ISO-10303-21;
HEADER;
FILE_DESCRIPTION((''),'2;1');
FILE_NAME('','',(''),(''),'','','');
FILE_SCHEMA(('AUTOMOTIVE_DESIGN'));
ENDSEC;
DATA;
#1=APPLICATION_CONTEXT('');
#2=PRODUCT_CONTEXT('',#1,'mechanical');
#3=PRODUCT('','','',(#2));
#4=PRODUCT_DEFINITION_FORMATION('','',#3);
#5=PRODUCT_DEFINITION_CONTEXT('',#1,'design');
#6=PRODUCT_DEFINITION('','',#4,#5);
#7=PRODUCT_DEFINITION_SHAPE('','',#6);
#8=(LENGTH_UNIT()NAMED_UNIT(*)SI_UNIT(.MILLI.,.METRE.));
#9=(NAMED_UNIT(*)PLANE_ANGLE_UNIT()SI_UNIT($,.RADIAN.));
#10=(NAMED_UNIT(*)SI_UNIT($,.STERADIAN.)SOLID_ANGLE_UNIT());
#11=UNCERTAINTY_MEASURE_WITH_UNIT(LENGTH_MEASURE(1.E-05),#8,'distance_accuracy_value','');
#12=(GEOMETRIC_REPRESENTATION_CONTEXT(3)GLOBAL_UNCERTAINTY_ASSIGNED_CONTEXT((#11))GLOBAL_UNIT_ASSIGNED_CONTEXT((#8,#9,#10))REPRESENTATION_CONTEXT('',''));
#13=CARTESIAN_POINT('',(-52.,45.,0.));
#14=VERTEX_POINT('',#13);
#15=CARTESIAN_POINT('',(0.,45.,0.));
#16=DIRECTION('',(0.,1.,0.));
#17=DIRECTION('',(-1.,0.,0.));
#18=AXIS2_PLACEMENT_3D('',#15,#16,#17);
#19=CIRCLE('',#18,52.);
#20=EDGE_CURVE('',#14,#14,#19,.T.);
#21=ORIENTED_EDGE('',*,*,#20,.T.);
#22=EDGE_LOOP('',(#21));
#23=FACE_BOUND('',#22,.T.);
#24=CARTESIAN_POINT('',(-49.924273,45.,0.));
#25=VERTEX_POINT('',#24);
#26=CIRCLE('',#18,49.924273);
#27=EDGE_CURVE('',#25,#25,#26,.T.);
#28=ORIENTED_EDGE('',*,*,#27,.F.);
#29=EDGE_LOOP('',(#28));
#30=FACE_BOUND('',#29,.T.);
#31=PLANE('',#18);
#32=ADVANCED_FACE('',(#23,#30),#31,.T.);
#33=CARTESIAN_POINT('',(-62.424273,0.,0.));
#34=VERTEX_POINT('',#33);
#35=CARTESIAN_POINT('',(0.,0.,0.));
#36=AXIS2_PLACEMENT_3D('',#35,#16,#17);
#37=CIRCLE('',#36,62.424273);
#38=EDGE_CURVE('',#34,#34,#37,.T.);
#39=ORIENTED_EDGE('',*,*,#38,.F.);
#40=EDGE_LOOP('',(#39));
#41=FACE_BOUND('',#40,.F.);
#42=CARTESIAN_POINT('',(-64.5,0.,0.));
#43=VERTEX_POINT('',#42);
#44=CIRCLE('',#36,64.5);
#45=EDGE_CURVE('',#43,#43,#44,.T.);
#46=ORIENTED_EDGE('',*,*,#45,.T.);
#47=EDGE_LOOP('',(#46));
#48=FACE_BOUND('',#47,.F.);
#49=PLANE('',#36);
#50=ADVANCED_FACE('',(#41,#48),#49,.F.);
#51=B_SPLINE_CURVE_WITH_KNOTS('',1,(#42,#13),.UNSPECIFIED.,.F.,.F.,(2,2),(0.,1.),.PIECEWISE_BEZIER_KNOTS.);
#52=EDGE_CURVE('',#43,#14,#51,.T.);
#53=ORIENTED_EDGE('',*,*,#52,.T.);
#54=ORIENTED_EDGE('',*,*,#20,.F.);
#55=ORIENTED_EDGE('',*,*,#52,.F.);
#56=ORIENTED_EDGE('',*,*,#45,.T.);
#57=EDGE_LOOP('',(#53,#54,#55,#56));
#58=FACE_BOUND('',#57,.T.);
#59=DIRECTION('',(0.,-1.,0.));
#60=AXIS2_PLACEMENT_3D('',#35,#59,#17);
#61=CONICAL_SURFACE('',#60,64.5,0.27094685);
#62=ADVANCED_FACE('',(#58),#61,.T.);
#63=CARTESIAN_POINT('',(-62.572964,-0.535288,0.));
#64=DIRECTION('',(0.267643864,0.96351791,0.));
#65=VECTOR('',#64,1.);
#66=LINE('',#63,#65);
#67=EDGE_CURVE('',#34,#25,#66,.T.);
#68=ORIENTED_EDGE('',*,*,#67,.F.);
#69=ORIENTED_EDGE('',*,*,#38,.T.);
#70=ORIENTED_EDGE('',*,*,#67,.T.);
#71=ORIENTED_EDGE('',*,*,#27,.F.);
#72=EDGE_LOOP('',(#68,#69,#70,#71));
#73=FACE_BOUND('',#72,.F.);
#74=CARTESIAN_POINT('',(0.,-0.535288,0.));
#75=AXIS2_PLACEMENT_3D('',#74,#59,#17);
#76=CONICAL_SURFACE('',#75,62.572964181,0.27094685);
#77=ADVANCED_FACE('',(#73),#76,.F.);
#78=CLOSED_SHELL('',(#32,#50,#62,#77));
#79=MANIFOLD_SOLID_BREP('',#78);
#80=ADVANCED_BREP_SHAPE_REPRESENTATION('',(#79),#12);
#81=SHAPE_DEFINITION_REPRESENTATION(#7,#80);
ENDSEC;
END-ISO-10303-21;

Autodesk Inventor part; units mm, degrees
ref_plane "YZ Plane" through (0, 0, 0) normal (1, 0, 0) x (0, 1, 0)
ref_plane "XY Plane" through (0, 0, 0) normal (0, 0, 1) x (1, 0, 0)
sketch "Szkic6" plane through (0, 0, 0) normal (0, 1, 0) x (-1, 0, 0)
  circle A0 centre (0, 0) radius 64.5
  dimension "d33" = 129
ref_plane "Płaszczyzna konstrukcyjna1" through (0, 45, 0) normal (0, 1, 0) x (-1, 0, 0)
sketch "Szkic7" plane through (0, 45, 0) normal (0, 1, 0) x (-1, 0, 0)
  circle A0 centre (0, 0) radius 52
  dimension "d35" = 104
loft "Wyciągnięcie złożone1" add profiles "Szkic6", "Szkic7"
shell "Skorupa1" thickness 2 removed faces 2 at (-18.5271, 45, 25.061) at (-10.0865, 0, -16.1433)
equation "\"d33\" = OD1"
equation "\"d35\" = OD2"
equation "\"d52\" = THK"
equation "\"SzerokośćGięciaPodcięcia\" = Grubość"
equation "\"RozmiarPodcięciaNarożnika\" = 4 * Grubość"
equation "\"PromieńPrzejścia\" = PromieńGięcia"
equation "\"Rozmiar_promienia_Jacobiego\" = PromieńGięcia"
equation "\"Wielk_odstępu\" = Grubość"
equation "\"d2\" = PromieńGięcia"
equation "\"d23\" = PromieńGięcia"
equation "\"OD1\" = 129"
equation "\"OD2\" = 104"
equation "\"L\" = 45"
equation "\"THK\" = 2"
equation "\"d34\" = L"
equation "\"Grubość\" = 1.5"
equation "\"PromieńGięcia\" = 3"
properties part number "Redukcja symetryczna Ø129x104x2 L=45" material "304"
